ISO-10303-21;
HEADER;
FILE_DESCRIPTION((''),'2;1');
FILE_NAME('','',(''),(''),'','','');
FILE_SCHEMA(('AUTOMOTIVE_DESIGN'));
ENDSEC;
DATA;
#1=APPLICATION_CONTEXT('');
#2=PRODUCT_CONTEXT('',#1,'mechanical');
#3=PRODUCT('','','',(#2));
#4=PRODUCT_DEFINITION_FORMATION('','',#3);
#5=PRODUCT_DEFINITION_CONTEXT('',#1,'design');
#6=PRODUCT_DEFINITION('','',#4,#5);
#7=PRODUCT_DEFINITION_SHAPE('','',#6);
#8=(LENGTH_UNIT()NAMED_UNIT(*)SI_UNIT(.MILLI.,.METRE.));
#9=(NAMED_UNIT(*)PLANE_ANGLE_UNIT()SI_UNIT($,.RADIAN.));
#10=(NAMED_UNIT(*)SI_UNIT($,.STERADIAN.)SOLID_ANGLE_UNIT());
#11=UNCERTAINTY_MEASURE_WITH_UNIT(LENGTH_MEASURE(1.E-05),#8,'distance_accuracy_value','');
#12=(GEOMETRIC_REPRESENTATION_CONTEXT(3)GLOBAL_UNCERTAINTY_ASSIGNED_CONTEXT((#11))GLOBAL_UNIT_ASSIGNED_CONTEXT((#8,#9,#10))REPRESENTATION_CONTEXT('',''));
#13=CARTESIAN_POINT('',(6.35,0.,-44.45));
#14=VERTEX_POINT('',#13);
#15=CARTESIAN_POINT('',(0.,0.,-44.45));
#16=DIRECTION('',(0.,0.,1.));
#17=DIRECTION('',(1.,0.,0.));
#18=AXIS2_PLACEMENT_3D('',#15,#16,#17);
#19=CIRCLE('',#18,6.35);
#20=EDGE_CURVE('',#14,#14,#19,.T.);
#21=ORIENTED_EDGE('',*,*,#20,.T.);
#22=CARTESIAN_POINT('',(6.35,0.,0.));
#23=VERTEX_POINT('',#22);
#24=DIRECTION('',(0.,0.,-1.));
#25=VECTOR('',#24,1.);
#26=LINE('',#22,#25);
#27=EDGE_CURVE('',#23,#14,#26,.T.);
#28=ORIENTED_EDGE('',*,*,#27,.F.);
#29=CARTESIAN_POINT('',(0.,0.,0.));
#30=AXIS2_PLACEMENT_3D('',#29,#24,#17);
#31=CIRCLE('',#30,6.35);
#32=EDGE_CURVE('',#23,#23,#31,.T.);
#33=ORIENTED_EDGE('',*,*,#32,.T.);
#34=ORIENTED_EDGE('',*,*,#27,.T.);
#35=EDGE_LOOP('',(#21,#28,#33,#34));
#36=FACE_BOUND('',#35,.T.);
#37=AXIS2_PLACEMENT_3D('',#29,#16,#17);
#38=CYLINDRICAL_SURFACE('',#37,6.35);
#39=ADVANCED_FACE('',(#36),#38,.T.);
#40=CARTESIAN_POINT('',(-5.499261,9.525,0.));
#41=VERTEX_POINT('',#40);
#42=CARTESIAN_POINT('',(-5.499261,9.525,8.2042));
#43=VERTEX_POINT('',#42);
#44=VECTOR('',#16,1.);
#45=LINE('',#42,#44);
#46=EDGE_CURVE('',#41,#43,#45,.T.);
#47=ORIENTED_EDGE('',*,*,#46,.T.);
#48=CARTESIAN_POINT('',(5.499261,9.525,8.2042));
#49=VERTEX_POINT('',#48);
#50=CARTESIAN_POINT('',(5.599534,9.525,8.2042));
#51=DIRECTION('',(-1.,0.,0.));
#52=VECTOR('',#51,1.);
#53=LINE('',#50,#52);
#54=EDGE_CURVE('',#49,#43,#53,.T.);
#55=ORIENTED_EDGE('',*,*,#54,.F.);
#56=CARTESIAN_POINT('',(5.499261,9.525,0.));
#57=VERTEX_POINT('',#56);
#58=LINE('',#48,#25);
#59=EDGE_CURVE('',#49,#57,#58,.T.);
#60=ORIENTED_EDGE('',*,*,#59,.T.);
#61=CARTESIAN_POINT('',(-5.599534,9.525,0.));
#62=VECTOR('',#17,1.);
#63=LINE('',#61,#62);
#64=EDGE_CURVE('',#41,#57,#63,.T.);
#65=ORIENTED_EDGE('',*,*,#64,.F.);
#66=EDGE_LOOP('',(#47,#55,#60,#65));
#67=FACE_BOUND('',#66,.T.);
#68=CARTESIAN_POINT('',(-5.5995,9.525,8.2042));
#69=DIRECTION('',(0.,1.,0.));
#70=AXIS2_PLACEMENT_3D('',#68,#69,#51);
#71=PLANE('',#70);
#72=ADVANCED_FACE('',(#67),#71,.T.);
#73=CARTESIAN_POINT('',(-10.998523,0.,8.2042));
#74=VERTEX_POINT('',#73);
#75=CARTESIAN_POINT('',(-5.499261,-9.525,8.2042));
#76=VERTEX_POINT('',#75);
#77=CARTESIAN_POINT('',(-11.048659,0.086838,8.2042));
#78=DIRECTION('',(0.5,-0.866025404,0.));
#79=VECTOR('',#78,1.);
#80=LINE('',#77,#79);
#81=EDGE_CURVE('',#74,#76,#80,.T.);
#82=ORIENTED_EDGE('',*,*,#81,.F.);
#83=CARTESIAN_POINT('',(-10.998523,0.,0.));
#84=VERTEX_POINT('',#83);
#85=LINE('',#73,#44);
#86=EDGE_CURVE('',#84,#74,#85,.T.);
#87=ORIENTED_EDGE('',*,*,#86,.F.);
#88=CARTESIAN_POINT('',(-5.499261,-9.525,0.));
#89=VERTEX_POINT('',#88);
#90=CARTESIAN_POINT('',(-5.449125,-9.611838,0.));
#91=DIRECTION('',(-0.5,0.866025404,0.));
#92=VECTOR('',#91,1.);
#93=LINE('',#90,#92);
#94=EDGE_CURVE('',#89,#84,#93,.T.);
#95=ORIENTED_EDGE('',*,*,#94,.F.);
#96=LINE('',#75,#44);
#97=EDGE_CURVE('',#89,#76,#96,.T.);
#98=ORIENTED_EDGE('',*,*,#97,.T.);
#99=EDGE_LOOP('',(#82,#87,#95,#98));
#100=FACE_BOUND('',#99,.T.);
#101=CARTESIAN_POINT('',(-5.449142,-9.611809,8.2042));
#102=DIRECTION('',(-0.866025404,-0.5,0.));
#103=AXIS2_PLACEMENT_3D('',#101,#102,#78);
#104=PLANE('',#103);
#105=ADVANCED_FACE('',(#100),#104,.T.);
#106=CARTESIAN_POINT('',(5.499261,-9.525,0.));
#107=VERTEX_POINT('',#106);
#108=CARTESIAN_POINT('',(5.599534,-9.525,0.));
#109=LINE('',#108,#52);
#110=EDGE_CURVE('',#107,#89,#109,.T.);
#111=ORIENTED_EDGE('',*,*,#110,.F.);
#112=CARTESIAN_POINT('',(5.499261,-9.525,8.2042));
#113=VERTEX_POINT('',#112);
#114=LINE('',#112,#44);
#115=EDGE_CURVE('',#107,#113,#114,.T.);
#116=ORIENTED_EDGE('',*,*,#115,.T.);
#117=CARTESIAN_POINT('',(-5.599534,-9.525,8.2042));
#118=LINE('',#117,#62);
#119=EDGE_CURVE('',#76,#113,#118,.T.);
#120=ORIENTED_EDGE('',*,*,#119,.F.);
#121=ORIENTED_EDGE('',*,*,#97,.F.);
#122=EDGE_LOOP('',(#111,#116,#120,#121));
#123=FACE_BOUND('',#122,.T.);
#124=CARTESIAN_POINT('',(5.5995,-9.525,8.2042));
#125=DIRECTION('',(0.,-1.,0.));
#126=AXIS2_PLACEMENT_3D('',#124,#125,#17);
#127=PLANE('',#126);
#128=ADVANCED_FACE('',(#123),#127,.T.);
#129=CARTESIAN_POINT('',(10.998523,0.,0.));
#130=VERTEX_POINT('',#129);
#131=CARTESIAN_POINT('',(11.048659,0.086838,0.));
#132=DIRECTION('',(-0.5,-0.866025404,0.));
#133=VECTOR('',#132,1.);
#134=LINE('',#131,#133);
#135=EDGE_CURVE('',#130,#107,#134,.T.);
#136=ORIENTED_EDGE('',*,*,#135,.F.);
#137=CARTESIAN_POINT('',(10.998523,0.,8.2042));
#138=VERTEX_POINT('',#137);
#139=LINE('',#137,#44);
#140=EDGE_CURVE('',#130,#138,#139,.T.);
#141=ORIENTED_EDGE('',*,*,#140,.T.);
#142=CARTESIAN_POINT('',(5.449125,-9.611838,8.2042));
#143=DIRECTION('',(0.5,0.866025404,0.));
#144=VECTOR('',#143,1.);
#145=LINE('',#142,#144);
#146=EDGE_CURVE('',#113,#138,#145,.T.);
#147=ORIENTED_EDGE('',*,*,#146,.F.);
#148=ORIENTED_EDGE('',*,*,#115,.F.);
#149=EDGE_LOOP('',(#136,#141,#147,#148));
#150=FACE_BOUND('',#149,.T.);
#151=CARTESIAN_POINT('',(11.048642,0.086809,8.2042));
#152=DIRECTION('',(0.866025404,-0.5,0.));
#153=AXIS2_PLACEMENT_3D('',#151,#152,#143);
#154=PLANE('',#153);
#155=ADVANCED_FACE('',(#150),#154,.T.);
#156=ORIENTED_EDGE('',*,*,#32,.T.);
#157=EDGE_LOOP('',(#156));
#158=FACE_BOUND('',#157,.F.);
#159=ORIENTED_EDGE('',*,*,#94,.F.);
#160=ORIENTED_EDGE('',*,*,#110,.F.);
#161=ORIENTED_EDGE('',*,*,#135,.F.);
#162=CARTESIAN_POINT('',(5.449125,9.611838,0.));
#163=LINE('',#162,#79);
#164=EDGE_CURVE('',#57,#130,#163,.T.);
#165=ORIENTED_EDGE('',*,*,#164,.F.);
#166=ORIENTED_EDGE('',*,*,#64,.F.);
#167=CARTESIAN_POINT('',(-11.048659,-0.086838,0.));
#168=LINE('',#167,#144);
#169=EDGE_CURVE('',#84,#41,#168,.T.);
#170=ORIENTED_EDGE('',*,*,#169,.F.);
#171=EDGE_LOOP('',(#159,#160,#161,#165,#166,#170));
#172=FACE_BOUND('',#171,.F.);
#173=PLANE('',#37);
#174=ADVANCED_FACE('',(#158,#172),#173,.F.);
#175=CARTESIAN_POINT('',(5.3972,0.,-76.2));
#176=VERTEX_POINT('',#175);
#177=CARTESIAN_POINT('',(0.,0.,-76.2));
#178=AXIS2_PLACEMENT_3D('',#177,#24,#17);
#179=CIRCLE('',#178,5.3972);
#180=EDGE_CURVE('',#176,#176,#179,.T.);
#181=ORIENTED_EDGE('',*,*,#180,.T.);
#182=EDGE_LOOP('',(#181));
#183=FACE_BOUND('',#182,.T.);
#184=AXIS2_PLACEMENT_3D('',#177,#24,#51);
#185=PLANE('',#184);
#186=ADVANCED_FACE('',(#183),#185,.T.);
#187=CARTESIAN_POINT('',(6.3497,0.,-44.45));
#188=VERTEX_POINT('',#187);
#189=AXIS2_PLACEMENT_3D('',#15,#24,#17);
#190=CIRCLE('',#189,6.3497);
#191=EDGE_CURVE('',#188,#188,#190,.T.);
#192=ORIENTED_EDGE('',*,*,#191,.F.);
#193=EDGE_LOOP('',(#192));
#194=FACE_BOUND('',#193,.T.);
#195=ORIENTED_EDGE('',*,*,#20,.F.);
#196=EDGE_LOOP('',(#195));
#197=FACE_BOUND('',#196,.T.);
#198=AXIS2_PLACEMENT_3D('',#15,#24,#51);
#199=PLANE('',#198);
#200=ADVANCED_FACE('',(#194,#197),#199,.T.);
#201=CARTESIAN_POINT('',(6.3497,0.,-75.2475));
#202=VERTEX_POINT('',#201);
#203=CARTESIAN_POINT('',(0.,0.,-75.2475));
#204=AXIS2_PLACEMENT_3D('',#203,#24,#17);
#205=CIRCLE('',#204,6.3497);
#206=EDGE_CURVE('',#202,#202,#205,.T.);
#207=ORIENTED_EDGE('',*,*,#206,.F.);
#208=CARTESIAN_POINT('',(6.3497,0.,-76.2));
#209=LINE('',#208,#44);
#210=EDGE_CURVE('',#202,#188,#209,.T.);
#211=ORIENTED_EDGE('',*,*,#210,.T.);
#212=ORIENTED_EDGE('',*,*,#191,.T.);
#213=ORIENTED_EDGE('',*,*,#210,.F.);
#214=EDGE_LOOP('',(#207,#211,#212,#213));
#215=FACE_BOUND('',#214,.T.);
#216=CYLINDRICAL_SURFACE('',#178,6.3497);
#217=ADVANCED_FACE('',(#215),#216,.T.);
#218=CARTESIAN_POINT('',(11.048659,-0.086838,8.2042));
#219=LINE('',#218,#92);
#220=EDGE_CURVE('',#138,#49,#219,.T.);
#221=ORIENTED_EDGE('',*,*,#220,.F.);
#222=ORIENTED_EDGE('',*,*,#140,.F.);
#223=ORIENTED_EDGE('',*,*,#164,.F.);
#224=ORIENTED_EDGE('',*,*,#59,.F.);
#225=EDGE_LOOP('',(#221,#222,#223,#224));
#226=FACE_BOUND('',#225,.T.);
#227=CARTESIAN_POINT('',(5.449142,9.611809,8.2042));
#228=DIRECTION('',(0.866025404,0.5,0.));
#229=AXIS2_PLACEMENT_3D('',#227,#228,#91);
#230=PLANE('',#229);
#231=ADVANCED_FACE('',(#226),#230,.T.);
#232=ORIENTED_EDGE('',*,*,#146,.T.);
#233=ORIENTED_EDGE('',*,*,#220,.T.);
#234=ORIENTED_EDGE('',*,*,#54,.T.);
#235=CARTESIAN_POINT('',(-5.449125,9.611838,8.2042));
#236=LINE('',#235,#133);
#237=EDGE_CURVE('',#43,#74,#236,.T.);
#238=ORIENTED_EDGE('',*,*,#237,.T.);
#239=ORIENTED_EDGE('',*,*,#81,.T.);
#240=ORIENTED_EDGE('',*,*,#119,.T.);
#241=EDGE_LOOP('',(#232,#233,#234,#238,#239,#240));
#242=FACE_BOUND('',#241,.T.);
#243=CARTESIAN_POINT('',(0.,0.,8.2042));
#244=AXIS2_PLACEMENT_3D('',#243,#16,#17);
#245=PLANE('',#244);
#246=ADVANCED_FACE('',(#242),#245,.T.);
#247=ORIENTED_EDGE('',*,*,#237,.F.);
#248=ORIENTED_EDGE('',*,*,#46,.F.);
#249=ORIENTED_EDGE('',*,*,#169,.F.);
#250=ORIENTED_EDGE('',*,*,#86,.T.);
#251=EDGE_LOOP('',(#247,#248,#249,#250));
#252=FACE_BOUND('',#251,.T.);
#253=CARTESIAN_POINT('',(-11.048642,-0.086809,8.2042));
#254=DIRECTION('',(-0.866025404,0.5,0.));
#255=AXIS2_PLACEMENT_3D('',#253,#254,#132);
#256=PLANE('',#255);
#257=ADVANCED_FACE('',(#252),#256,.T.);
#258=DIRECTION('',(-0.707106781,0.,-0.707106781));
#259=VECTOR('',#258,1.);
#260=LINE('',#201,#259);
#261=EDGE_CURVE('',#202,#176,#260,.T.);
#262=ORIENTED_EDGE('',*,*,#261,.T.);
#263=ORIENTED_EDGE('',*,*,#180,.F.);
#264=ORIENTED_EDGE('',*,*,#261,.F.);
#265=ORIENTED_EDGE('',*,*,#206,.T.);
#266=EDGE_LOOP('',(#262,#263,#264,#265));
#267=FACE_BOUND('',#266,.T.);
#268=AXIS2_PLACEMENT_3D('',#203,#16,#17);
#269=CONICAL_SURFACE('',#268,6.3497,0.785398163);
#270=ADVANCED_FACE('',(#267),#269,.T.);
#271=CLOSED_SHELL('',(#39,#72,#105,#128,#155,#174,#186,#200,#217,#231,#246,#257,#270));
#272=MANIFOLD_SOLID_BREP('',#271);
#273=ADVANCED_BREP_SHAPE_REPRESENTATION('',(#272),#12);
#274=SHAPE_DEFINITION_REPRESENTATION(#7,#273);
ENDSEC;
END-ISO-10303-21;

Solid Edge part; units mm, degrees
sketch "Sketch1" plane through (0, 0, 0) normal (0, 0, 1) x (1, 0, 0)
  circle A0 centre (0, 0) radius 11.049
  dimension "D1" = 22.098
extrude "Protrusion1" add sketch "Sketch1" along normal blind 8.2042
sketch "Sketch2" plane through (0, 0, 0) normal (0, 0, -1) x (1, 0, 0)
  circle A0 centre (0, 0) radius 6.35
extrude "Protrusion2" add sketch "Sketch2" along normal blind 76.2
sketch "Sketch3" plane through (0, 0, -76.2) normal (0, 0, -1) x (1, 0, 0)
  circle A0 centre (0, 0) radius 6.3497
extrude "Cutout1" cut sketch "Sketch3" against normal blind 31.75 flip side to cut
chamfer "Chamfer_1" distance 0.9525 angle 45 1 edges at (-6.3497, 0, -76.2)
sketch "Sketch4" plane through (0, 0, 8.2042) normal (0, 0, 1) x (1, 0, 0)
  line L0 (-5.5995, 9.525) -> (5.5995, 9.525)
  dimension "D1" = 19.05
extrude "Cutout2" cut sketch "Sketch4" against normal up to next material side at (0, 9.575, 8.2042)
pattern_circular "Pattern1" count 6 over 360 about axis through (0, 0, 8.2042) along (0, 0, 1) of "Cutout2"
properties part number "24100034"
